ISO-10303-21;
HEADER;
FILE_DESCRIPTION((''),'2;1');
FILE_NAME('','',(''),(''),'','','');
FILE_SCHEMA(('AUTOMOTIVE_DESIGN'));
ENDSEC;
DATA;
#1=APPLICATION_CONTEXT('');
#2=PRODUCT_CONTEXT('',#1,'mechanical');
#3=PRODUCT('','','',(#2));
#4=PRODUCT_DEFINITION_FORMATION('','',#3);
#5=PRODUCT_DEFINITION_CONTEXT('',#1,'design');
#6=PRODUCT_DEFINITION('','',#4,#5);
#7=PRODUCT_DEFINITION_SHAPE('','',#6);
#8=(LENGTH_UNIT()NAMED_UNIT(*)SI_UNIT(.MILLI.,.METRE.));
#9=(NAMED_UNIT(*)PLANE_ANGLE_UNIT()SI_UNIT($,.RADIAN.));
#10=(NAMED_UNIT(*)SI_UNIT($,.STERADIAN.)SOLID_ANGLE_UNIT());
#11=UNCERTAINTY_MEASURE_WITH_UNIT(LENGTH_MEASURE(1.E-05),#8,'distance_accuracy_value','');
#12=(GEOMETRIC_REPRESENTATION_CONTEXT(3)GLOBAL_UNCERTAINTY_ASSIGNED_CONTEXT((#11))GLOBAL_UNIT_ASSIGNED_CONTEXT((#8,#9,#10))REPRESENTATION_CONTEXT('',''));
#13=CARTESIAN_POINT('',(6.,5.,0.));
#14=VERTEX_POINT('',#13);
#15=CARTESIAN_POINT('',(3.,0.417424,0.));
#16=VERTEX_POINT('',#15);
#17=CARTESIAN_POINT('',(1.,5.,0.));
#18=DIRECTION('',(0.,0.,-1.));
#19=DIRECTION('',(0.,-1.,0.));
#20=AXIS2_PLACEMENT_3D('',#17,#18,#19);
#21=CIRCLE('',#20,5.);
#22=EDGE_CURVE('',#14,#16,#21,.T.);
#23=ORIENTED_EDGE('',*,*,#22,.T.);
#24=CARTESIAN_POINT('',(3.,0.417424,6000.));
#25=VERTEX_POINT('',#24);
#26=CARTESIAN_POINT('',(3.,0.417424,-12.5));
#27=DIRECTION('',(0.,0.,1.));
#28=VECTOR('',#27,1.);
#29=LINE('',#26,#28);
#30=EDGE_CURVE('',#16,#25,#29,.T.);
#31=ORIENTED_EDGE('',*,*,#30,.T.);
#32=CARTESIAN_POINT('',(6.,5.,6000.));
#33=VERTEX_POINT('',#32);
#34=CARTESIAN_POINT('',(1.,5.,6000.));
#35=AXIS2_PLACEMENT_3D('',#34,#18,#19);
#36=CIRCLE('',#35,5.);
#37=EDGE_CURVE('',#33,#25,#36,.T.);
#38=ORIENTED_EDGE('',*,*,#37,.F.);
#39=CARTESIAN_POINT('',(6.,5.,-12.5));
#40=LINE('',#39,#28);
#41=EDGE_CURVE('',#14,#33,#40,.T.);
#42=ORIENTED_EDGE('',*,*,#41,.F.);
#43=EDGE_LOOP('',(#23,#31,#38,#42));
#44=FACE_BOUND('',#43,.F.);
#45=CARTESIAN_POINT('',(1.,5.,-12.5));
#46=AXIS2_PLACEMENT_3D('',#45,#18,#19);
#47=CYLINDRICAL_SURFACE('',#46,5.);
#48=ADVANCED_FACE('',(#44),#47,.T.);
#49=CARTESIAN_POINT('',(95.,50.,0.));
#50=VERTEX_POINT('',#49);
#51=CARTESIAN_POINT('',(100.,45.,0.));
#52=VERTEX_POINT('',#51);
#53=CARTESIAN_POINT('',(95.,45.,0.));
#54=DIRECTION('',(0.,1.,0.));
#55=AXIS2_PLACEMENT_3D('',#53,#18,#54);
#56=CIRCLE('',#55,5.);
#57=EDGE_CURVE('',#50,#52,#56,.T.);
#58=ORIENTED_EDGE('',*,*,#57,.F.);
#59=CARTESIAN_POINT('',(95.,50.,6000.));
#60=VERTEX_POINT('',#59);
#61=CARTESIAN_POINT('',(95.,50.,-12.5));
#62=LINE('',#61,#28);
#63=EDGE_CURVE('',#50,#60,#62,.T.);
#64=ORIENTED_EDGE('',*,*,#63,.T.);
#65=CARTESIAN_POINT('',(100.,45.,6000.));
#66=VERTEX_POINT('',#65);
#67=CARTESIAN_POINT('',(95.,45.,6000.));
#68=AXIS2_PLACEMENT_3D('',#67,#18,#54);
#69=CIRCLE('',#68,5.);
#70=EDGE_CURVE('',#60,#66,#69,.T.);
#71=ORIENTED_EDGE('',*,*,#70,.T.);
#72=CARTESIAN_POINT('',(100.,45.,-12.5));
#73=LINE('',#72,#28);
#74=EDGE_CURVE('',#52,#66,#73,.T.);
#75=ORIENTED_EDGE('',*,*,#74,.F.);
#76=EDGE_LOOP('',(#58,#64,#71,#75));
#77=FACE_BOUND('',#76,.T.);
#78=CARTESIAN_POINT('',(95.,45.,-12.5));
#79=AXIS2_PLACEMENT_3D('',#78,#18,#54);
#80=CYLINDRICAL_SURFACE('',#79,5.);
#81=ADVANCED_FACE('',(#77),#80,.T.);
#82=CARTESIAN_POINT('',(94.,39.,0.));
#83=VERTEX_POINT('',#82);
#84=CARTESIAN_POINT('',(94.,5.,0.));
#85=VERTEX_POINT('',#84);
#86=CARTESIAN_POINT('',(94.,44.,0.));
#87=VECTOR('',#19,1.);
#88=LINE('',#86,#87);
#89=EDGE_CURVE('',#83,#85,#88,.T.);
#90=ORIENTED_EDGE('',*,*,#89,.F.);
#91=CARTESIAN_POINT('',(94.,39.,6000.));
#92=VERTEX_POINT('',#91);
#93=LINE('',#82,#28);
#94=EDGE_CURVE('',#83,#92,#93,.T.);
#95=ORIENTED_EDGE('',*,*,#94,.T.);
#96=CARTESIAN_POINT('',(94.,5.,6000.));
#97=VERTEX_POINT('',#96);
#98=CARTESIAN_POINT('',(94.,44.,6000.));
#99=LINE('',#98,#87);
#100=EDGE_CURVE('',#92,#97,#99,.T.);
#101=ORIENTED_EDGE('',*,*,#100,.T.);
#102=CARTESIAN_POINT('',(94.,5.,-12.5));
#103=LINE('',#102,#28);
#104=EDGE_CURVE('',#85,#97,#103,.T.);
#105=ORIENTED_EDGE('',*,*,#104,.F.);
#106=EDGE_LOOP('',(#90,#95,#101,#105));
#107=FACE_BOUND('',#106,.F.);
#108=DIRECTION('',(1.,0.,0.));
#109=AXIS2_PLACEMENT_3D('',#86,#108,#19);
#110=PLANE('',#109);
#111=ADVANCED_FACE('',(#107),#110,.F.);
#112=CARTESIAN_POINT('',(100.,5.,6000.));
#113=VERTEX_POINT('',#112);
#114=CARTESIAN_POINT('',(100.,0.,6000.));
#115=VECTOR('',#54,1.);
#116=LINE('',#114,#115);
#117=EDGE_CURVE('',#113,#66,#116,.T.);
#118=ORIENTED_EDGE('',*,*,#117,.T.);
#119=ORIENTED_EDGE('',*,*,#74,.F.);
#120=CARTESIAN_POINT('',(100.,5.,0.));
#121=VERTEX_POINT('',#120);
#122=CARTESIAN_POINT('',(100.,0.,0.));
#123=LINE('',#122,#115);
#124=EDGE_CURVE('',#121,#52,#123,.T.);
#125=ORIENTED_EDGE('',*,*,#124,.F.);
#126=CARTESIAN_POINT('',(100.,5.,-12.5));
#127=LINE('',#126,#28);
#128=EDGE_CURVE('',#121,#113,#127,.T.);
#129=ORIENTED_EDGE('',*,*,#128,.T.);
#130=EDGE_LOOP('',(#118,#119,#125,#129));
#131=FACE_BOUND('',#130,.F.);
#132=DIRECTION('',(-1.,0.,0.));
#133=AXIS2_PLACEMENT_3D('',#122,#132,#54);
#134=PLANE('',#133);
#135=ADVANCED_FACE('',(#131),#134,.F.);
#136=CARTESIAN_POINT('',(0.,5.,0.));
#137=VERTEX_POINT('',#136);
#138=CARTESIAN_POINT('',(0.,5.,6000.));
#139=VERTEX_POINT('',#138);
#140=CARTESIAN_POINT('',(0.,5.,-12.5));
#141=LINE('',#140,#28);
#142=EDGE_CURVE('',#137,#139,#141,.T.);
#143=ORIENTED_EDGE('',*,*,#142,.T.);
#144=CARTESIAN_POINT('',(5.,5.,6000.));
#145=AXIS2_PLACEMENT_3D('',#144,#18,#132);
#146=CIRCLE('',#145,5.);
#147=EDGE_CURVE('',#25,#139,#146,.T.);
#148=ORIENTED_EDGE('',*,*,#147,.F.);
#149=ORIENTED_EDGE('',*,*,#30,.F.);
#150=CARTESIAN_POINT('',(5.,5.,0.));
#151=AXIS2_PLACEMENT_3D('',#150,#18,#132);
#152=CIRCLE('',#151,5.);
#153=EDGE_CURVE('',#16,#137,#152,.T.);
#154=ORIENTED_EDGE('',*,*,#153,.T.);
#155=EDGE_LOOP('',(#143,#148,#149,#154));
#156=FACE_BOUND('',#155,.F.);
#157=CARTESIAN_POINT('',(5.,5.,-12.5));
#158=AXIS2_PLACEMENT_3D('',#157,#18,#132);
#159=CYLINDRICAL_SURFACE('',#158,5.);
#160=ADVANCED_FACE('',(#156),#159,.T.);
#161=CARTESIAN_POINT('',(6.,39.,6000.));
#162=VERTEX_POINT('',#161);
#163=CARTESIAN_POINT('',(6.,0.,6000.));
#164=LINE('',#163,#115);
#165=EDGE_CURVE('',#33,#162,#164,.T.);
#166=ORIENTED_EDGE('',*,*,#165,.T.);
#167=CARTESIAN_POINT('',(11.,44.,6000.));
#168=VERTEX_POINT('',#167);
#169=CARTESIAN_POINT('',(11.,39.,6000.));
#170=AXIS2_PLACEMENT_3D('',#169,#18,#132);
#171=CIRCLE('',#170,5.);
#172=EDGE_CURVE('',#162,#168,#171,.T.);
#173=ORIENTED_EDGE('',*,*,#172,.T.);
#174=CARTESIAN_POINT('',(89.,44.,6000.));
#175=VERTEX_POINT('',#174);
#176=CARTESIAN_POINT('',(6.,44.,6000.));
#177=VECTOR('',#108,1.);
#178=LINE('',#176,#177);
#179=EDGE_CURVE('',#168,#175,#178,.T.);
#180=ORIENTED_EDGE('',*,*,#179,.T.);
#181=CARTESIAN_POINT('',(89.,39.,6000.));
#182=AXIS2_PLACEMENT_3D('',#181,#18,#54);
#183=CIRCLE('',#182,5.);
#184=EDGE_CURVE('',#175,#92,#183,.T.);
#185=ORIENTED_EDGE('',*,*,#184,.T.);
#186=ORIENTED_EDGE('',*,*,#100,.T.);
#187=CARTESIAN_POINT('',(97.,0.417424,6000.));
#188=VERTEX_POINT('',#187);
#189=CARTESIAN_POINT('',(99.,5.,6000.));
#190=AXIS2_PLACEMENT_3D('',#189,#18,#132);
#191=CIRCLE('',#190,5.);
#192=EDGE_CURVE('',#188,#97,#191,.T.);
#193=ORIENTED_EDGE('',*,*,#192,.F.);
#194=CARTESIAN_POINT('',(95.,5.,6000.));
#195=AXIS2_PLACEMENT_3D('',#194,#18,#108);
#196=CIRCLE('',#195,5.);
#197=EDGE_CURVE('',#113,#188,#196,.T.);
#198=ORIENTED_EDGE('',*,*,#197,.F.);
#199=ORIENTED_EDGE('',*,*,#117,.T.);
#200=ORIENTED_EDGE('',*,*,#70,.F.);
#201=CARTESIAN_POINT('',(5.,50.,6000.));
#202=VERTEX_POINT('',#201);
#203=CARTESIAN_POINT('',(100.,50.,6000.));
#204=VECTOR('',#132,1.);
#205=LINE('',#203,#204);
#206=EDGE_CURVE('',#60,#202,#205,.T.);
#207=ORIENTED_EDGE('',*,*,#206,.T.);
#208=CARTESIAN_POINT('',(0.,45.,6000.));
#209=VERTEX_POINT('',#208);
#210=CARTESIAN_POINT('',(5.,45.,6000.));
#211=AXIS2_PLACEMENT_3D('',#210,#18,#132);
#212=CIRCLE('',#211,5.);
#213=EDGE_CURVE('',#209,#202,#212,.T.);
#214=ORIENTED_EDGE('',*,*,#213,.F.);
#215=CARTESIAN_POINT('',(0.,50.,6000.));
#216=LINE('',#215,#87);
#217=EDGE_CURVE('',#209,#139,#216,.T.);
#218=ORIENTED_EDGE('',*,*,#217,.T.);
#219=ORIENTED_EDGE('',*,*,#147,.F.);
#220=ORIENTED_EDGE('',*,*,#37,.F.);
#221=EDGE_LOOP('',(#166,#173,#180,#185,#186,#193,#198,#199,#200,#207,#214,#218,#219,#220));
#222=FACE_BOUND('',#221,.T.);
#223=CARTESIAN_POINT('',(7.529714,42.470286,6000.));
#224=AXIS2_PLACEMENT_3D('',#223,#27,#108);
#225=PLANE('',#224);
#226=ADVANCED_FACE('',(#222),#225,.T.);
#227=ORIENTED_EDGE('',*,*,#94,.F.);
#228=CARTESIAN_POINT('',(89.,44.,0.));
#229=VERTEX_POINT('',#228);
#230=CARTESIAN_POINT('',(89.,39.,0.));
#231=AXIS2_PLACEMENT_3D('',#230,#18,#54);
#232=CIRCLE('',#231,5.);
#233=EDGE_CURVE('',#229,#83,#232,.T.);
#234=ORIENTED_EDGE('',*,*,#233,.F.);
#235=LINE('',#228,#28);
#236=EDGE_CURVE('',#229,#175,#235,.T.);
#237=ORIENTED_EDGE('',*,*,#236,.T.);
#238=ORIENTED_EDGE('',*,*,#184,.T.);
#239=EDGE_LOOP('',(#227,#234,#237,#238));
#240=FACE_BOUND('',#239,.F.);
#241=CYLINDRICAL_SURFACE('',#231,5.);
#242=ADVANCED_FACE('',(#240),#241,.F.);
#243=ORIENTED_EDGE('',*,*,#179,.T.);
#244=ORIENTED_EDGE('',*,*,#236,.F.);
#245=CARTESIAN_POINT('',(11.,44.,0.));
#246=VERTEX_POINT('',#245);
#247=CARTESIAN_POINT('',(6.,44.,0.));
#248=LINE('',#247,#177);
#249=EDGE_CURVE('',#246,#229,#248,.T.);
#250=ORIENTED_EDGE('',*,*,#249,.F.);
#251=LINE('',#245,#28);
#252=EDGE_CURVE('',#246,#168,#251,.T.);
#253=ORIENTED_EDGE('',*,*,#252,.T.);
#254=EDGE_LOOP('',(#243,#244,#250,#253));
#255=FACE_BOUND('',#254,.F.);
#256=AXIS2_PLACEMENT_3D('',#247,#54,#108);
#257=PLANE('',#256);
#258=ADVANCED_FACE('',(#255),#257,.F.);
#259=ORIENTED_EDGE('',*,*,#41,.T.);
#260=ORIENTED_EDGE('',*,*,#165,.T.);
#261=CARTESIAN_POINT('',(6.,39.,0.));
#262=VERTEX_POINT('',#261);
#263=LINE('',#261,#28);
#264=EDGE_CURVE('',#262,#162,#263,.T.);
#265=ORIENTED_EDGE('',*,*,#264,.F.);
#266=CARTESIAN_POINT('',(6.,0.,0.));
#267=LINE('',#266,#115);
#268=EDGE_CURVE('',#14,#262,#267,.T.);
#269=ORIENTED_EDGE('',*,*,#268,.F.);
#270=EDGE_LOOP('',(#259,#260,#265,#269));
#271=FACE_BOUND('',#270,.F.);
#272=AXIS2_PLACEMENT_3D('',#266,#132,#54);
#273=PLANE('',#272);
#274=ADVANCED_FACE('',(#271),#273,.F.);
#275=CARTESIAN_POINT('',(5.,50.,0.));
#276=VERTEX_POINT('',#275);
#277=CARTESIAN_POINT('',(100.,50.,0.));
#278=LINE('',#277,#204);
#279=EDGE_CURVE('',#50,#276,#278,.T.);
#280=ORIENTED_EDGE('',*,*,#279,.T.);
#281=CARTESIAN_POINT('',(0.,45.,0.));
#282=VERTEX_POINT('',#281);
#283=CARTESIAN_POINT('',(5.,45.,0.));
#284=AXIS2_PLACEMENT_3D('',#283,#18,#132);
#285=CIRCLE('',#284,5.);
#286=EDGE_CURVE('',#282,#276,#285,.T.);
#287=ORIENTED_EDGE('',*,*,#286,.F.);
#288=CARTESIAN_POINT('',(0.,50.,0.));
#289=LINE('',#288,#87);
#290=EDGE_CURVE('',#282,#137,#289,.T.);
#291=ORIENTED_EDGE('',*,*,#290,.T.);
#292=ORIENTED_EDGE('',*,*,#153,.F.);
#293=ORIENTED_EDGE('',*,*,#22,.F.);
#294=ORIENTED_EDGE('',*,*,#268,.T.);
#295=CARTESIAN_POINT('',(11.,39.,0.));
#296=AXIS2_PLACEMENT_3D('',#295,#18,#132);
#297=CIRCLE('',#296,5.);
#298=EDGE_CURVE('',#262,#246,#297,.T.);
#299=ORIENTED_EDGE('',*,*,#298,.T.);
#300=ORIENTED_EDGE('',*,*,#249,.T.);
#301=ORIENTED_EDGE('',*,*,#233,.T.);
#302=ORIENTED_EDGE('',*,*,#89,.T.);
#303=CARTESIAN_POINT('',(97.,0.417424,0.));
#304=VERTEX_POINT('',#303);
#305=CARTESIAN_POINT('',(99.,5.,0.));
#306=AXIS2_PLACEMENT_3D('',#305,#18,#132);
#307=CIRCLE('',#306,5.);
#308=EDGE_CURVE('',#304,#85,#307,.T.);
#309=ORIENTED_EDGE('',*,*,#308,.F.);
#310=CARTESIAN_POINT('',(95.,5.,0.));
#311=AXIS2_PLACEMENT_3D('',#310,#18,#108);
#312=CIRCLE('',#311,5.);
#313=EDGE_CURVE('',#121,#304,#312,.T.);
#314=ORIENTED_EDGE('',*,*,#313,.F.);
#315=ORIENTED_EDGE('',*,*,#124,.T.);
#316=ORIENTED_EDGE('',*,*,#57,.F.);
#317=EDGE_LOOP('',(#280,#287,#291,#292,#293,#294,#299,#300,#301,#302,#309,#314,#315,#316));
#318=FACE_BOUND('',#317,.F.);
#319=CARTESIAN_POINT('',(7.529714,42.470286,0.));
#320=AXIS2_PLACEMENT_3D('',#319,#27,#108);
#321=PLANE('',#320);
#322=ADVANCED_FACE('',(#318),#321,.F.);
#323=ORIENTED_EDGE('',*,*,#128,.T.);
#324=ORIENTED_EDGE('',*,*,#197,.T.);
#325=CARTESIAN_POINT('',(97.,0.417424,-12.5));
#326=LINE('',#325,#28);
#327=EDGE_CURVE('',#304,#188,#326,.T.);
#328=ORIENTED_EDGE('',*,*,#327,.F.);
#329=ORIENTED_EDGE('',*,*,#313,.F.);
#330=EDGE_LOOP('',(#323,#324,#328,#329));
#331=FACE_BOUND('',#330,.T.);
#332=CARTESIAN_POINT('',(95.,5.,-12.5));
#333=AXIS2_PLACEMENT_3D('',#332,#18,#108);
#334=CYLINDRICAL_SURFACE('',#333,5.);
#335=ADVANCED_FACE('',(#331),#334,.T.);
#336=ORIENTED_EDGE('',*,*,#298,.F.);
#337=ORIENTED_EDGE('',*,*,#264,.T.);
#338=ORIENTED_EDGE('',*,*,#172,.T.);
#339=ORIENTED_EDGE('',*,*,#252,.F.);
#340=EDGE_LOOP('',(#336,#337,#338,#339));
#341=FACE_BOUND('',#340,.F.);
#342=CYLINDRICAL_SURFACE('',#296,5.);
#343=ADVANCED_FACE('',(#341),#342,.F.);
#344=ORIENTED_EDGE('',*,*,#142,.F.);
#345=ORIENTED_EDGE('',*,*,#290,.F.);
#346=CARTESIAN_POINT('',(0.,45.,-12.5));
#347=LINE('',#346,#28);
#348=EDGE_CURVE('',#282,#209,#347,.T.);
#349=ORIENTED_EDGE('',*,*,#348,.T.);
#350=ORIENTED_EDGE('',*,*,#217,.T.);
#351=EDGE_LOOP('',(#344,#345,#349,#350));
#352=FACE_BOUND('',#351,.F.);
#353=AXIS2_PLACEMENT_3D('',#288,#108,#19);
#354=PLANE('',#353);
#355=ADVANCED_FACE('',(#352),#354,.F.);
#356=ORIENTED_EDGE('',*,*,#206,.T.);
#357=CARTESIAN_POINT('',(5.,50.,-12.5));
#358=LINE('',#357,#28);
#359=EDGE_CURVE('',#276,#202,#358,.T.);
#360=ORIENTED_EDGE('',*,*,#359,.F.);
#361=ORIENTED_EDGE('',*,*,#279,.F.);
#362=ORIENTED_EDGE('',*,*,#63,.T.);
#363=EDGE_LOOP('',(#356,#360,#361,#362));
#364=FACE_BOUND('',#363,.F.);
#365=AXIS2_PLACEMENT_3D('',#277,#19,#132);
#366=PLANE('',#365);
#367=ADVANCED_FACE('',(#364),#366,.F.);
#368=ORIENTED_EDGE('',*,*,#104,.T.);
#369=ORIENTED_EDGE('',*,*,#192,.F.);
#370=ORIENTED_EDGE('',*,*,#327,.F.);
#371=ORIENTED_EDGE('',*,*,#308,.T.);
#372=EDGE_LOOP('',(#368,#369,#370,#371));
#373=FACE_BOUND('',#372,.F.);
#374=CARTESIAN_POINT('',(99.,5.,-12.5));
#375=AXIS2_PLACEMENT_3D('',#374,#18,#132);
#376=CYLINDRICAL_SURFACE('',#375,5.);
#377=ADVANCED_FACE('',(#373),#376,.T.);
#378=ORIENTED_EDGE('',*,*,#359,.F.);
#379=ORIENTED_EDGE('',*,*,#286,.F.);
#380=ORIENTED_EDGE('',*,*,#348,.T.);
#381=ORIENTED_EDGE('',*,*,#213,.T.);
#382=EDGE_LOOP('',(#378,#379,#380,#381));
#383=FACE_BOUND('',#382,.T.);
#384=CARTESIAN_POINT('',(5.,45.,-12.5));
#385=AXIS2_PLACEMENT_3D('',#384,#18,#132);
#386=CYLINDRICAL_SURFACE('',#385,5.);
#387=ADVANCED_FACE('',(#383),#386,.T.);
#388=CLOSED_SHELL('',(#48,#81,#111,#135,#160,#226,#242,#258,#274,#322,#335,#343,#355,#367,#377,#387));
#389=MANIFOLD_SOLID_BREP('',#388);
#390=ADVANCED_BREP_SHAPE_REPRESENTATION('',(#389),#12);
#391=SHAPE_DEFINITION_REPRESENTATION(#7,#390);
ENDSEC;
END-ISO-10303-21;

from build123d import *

# Parameters (mm, degrees)
F1_DEPTH    = 6000
F2_T1_DEPTH = 6000
F2_T3_DEPTH = 6025


# Not quite as in the source:
# - a fillet or chamfer that OpenCascade refuses, or shapes differently, is made with other operations: its cross-section is extruded or revolved along the edge and cut away or added


with BuildPart() as f1:
    # F0 (on Top) → F1 (new body)
    with BuildSketch(Plane.XY):
        Polygon((0, 50), (0, 0), (6, 0), (6, 44), (94, 44), (94, 0), (100, 0), (100, 50), align=None)
    extrude(amount=F1_DEPTH)

    # F2: fillet of radius 5 on 8 edges, made by hand

    # F2_s2 → F2_t1 (join)
    with BuildSketch(Plane.XY):
        with BuildLine():
            ThreePointArc((6, 39), (7.4644660941, 42.5355339059), (11, 44))
            Line((11, 44), (6, 44))
            Line((6, 44), (6, 39))
        make_face()
        with BuildLine():
            ThreePointArc((89, 44), (92.5355339059, 42.5355339059), (94, 39))
            Line((94, 39), (94, 44))
            Line((94, 44), (89, 44))
        make_face()
    extrude(amount=F2_T1_DEPTH)

    # F2_s4 → F2_t3 (cut)
    with BuildSketch(Plane.XY.offset(-12.5)):
        with BuildLine():
            ThreePointArc((1, 0), (4.5355339059, 1.4644660941), (6, 5))
            Line((6, 5), (6, 0))
            Line((6, 0), (1, 0))
        make_face()
        with BuildLine():
            ThreePointArc((0, 5), (1.4644660941, 1.4644660941), (5, 0))
            Line((5, 0), (0, 0))
            Line((0, 0), (0, 5))
        make_face()
        with BuildLine():
            ThreePointArc((100, 5), (98.5355339059, 1.4644660941), (95, 0))
            Line((95, 0), (100, 0))
            Line((100, 0), (100, 5))
        make_face()
        with BuildLine():
            ThreePointArc((94, 5), (95.4644660941, 1.4644660941), (99, 0))
            Line((99, 0), (94, 0))
            Line((94, 0), (94, 5))
        make_face()
        with BuildLine():
            ThreePointArc((0, 45), (1.4644660941, 48.5355339059), (5, 50))
            Line((5, 50), (0, 50))
            Line((0, 50), (0, 45))
        make_face()
        with BuildLine():
            ThreePointArc((95, 50), (98.5355339059, 48.5355339059), (100, 45))
            Line((100, 45), (100, 50))
            Line((100, 50), (95, 50))
        make_face()
    extrude(amount=F2_T3_DEPTH, mode=Mode.SUBTRACT)


solid = f1.part
